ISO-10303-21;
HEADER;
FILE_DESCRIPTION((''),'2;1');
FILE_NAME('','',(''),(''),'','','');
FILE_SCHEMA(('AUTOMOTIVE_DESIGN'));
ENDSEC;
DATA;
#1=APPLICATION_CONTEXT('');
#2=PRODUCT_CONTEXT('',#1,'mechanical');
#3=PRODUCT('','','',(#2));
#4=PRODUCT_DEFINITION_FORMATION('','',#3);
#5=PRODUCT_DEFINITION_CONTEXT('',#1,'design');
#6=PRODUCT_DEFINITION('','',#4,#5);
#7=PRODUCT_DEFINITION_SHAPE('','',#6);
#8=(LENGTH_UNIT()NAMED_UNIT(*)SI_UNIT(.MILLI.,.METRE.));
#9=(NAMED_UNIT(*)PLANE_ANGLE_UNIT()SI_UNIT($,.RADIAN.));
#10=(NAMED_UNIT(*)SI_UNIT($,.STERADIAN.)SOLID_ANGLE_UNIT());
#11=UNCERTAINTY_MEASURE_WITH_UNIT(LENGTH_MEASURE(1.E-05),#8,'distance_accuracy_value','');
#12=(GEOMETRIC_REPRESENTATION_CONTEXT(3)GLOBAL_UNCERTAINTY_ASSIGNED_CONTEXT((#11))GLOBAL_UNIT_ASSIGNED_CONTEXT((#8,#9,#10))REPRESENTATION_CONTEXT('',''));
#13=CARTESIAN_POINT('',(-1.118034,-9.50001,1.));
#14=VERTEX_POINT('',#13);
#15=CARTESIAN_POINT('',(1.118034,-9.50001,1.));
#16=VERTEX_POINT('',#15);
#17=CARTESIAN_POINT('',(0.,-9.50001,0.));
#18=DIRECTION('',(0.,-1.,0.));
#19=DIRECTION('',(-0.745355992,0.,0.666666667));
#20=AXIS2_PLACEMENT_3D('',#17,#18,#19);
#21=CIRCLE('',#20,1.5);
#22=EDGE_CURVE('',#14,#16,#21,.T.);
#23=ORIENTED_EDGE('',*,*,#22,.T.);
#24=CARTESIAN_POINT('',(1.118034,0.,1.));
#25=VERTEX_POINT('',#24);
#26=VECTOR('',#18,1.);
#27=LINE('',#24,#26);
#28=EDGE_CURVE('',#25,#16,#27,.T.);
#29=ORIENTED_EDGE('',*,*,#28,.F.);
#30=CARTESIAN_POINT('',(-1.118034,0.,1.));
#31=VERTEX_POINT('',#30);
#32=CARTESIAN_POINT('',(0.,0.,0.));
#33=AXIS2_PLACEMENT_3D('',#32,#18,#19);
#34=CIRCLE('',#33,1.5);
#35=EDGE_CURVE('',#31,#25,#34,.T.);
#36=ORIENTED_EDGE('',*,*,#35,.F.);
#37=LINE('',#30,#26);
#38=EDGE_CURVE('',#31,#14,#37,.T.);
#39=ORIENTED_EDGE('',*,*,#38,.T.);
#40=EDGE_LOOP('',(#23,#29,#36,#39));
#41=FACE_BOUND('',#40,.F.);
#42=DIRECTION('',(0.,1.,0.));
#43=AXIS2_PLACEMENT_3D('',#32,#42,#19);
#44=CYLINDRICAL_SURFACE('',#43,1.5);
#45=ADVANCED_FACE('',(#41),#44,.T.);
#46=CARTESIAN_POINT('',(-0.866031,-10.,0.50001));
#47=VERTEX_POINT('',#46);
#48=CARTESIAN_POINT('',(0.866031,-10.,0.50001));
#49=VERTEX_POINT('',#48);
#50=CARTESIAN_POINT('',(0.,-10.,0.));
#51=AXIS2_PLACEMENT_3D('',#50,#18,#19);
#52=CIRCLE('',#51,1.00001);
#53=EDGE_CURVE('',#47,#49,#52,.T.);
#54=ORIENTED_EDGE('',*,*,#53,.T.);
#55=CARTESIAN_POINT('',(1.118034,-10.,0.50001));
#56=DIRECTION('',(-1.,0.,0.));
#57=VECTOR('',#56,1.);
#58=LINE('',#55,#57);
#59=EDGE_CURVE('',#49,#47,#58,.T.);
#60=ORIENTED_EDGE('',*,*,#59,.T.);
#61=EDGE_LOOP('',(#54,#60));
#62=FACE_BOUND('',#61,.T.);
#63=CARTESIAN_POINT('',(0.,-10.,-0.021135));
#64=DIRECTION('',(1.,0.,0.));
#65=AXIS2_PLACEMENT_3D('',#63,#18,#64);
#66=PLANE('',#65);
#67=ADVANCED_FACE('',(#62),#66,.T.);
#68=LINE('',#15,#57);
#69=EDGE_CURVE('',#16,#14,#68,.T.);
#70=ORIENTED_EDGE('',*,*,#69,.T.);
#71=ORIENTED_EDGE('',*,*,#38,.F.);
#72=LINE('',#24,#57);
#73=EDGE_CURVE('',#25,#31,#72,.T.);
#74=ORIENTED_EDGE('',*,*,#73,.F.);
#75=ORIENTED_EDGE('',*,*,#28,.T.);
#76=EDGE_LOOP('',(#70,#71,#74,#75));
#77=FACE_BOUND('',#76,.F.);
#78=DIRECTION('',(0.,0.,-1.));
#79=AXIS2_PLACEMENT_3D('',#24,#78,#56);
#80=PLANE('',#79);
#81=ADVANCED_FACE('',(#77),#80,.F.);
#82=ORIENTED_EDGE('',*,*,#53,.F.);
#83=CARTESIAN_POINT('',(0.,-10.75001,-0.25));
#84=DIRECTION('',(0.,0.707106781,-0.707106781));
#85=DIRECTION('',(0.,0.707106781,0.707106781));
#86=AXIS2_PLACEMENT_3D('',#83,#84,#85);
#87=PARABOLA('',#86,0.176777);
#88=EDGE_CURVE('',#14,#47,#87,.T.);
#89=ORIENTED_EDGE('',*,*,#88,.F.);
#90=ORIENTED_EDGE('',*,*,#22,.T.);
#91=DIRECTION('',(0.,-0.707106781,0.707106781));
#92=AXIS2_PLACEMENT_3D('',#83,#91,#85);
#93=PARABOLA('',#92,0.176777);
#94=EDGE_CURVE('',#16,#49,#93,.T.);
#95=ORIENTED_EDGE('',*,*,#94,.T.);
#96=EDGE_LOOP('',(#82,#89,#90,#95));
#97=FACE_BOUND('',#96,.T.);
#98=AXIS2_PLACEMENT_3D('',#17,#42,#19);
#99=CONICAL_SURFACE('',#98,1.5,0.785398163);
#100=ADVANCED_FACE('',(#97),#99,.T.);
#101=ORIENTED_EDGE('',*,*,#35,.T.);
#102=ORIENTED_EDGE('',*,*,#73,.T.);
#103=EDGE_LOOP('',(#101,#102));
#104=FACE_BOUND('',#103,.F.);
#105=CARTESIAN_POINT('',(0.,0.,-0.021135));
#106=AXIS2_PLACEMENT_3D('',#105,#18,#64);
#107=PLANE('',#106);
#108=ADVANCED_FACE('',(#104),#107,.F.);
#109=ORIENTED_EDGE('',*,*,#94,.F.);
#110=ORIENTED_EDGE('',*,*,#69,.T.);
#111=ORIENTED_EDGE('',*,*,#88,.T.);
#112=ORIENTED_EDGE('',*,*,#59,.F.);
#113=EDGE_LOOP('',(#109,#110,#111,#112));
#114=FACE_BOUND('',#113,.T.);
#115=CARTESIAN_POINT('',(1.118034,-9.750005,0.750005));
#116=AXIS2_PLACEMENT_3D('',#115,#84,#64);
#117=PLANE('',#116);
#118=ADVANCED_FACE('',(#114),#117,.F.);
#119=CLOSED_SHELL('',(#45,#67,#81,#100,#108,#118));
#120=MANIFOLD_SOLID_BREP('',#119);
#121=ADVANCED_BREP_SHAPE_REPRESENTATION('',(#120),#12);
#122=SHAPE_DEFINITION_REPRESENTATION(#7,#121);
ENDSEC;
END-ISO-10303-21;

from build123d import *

# Parameters (mm, degrees)
F1_DEPTH = 10
F2_SIZE  = 0.49999


# Not quite as in the source:
# - a fillet or chamfer is up to 0.001 mm smaller than in the source, because OpenCascade refuses the exact size
# - a feature names something its author has since deleted; it is built from what else it names


with BuildPart() as f1:
    # F0 (on Front) → F1 (new body)
    with BuildSketch(Plane.XZ):
        with BuildLine():
            Line((1.1180339887, 1), (-1.1180339887, 1))
            ThreePointArc((-1.1180339887, 1), (0, -1.5), (1.1180339887, 1))
        make_face()
    extrude(amount=F1_DEPTH)

    # F2 (size 0.5 in the source; OpenCascade refuses exactly that, so slightly less here)
    f2_edges = [f1.edges().sort_by_distance(p)[0] for p in [
        (0, -10, 1),
        (0, -10, -1.5),
    ]]
    chamfer(f2_edges, length=F2_SIZE)


solid = f1.part
